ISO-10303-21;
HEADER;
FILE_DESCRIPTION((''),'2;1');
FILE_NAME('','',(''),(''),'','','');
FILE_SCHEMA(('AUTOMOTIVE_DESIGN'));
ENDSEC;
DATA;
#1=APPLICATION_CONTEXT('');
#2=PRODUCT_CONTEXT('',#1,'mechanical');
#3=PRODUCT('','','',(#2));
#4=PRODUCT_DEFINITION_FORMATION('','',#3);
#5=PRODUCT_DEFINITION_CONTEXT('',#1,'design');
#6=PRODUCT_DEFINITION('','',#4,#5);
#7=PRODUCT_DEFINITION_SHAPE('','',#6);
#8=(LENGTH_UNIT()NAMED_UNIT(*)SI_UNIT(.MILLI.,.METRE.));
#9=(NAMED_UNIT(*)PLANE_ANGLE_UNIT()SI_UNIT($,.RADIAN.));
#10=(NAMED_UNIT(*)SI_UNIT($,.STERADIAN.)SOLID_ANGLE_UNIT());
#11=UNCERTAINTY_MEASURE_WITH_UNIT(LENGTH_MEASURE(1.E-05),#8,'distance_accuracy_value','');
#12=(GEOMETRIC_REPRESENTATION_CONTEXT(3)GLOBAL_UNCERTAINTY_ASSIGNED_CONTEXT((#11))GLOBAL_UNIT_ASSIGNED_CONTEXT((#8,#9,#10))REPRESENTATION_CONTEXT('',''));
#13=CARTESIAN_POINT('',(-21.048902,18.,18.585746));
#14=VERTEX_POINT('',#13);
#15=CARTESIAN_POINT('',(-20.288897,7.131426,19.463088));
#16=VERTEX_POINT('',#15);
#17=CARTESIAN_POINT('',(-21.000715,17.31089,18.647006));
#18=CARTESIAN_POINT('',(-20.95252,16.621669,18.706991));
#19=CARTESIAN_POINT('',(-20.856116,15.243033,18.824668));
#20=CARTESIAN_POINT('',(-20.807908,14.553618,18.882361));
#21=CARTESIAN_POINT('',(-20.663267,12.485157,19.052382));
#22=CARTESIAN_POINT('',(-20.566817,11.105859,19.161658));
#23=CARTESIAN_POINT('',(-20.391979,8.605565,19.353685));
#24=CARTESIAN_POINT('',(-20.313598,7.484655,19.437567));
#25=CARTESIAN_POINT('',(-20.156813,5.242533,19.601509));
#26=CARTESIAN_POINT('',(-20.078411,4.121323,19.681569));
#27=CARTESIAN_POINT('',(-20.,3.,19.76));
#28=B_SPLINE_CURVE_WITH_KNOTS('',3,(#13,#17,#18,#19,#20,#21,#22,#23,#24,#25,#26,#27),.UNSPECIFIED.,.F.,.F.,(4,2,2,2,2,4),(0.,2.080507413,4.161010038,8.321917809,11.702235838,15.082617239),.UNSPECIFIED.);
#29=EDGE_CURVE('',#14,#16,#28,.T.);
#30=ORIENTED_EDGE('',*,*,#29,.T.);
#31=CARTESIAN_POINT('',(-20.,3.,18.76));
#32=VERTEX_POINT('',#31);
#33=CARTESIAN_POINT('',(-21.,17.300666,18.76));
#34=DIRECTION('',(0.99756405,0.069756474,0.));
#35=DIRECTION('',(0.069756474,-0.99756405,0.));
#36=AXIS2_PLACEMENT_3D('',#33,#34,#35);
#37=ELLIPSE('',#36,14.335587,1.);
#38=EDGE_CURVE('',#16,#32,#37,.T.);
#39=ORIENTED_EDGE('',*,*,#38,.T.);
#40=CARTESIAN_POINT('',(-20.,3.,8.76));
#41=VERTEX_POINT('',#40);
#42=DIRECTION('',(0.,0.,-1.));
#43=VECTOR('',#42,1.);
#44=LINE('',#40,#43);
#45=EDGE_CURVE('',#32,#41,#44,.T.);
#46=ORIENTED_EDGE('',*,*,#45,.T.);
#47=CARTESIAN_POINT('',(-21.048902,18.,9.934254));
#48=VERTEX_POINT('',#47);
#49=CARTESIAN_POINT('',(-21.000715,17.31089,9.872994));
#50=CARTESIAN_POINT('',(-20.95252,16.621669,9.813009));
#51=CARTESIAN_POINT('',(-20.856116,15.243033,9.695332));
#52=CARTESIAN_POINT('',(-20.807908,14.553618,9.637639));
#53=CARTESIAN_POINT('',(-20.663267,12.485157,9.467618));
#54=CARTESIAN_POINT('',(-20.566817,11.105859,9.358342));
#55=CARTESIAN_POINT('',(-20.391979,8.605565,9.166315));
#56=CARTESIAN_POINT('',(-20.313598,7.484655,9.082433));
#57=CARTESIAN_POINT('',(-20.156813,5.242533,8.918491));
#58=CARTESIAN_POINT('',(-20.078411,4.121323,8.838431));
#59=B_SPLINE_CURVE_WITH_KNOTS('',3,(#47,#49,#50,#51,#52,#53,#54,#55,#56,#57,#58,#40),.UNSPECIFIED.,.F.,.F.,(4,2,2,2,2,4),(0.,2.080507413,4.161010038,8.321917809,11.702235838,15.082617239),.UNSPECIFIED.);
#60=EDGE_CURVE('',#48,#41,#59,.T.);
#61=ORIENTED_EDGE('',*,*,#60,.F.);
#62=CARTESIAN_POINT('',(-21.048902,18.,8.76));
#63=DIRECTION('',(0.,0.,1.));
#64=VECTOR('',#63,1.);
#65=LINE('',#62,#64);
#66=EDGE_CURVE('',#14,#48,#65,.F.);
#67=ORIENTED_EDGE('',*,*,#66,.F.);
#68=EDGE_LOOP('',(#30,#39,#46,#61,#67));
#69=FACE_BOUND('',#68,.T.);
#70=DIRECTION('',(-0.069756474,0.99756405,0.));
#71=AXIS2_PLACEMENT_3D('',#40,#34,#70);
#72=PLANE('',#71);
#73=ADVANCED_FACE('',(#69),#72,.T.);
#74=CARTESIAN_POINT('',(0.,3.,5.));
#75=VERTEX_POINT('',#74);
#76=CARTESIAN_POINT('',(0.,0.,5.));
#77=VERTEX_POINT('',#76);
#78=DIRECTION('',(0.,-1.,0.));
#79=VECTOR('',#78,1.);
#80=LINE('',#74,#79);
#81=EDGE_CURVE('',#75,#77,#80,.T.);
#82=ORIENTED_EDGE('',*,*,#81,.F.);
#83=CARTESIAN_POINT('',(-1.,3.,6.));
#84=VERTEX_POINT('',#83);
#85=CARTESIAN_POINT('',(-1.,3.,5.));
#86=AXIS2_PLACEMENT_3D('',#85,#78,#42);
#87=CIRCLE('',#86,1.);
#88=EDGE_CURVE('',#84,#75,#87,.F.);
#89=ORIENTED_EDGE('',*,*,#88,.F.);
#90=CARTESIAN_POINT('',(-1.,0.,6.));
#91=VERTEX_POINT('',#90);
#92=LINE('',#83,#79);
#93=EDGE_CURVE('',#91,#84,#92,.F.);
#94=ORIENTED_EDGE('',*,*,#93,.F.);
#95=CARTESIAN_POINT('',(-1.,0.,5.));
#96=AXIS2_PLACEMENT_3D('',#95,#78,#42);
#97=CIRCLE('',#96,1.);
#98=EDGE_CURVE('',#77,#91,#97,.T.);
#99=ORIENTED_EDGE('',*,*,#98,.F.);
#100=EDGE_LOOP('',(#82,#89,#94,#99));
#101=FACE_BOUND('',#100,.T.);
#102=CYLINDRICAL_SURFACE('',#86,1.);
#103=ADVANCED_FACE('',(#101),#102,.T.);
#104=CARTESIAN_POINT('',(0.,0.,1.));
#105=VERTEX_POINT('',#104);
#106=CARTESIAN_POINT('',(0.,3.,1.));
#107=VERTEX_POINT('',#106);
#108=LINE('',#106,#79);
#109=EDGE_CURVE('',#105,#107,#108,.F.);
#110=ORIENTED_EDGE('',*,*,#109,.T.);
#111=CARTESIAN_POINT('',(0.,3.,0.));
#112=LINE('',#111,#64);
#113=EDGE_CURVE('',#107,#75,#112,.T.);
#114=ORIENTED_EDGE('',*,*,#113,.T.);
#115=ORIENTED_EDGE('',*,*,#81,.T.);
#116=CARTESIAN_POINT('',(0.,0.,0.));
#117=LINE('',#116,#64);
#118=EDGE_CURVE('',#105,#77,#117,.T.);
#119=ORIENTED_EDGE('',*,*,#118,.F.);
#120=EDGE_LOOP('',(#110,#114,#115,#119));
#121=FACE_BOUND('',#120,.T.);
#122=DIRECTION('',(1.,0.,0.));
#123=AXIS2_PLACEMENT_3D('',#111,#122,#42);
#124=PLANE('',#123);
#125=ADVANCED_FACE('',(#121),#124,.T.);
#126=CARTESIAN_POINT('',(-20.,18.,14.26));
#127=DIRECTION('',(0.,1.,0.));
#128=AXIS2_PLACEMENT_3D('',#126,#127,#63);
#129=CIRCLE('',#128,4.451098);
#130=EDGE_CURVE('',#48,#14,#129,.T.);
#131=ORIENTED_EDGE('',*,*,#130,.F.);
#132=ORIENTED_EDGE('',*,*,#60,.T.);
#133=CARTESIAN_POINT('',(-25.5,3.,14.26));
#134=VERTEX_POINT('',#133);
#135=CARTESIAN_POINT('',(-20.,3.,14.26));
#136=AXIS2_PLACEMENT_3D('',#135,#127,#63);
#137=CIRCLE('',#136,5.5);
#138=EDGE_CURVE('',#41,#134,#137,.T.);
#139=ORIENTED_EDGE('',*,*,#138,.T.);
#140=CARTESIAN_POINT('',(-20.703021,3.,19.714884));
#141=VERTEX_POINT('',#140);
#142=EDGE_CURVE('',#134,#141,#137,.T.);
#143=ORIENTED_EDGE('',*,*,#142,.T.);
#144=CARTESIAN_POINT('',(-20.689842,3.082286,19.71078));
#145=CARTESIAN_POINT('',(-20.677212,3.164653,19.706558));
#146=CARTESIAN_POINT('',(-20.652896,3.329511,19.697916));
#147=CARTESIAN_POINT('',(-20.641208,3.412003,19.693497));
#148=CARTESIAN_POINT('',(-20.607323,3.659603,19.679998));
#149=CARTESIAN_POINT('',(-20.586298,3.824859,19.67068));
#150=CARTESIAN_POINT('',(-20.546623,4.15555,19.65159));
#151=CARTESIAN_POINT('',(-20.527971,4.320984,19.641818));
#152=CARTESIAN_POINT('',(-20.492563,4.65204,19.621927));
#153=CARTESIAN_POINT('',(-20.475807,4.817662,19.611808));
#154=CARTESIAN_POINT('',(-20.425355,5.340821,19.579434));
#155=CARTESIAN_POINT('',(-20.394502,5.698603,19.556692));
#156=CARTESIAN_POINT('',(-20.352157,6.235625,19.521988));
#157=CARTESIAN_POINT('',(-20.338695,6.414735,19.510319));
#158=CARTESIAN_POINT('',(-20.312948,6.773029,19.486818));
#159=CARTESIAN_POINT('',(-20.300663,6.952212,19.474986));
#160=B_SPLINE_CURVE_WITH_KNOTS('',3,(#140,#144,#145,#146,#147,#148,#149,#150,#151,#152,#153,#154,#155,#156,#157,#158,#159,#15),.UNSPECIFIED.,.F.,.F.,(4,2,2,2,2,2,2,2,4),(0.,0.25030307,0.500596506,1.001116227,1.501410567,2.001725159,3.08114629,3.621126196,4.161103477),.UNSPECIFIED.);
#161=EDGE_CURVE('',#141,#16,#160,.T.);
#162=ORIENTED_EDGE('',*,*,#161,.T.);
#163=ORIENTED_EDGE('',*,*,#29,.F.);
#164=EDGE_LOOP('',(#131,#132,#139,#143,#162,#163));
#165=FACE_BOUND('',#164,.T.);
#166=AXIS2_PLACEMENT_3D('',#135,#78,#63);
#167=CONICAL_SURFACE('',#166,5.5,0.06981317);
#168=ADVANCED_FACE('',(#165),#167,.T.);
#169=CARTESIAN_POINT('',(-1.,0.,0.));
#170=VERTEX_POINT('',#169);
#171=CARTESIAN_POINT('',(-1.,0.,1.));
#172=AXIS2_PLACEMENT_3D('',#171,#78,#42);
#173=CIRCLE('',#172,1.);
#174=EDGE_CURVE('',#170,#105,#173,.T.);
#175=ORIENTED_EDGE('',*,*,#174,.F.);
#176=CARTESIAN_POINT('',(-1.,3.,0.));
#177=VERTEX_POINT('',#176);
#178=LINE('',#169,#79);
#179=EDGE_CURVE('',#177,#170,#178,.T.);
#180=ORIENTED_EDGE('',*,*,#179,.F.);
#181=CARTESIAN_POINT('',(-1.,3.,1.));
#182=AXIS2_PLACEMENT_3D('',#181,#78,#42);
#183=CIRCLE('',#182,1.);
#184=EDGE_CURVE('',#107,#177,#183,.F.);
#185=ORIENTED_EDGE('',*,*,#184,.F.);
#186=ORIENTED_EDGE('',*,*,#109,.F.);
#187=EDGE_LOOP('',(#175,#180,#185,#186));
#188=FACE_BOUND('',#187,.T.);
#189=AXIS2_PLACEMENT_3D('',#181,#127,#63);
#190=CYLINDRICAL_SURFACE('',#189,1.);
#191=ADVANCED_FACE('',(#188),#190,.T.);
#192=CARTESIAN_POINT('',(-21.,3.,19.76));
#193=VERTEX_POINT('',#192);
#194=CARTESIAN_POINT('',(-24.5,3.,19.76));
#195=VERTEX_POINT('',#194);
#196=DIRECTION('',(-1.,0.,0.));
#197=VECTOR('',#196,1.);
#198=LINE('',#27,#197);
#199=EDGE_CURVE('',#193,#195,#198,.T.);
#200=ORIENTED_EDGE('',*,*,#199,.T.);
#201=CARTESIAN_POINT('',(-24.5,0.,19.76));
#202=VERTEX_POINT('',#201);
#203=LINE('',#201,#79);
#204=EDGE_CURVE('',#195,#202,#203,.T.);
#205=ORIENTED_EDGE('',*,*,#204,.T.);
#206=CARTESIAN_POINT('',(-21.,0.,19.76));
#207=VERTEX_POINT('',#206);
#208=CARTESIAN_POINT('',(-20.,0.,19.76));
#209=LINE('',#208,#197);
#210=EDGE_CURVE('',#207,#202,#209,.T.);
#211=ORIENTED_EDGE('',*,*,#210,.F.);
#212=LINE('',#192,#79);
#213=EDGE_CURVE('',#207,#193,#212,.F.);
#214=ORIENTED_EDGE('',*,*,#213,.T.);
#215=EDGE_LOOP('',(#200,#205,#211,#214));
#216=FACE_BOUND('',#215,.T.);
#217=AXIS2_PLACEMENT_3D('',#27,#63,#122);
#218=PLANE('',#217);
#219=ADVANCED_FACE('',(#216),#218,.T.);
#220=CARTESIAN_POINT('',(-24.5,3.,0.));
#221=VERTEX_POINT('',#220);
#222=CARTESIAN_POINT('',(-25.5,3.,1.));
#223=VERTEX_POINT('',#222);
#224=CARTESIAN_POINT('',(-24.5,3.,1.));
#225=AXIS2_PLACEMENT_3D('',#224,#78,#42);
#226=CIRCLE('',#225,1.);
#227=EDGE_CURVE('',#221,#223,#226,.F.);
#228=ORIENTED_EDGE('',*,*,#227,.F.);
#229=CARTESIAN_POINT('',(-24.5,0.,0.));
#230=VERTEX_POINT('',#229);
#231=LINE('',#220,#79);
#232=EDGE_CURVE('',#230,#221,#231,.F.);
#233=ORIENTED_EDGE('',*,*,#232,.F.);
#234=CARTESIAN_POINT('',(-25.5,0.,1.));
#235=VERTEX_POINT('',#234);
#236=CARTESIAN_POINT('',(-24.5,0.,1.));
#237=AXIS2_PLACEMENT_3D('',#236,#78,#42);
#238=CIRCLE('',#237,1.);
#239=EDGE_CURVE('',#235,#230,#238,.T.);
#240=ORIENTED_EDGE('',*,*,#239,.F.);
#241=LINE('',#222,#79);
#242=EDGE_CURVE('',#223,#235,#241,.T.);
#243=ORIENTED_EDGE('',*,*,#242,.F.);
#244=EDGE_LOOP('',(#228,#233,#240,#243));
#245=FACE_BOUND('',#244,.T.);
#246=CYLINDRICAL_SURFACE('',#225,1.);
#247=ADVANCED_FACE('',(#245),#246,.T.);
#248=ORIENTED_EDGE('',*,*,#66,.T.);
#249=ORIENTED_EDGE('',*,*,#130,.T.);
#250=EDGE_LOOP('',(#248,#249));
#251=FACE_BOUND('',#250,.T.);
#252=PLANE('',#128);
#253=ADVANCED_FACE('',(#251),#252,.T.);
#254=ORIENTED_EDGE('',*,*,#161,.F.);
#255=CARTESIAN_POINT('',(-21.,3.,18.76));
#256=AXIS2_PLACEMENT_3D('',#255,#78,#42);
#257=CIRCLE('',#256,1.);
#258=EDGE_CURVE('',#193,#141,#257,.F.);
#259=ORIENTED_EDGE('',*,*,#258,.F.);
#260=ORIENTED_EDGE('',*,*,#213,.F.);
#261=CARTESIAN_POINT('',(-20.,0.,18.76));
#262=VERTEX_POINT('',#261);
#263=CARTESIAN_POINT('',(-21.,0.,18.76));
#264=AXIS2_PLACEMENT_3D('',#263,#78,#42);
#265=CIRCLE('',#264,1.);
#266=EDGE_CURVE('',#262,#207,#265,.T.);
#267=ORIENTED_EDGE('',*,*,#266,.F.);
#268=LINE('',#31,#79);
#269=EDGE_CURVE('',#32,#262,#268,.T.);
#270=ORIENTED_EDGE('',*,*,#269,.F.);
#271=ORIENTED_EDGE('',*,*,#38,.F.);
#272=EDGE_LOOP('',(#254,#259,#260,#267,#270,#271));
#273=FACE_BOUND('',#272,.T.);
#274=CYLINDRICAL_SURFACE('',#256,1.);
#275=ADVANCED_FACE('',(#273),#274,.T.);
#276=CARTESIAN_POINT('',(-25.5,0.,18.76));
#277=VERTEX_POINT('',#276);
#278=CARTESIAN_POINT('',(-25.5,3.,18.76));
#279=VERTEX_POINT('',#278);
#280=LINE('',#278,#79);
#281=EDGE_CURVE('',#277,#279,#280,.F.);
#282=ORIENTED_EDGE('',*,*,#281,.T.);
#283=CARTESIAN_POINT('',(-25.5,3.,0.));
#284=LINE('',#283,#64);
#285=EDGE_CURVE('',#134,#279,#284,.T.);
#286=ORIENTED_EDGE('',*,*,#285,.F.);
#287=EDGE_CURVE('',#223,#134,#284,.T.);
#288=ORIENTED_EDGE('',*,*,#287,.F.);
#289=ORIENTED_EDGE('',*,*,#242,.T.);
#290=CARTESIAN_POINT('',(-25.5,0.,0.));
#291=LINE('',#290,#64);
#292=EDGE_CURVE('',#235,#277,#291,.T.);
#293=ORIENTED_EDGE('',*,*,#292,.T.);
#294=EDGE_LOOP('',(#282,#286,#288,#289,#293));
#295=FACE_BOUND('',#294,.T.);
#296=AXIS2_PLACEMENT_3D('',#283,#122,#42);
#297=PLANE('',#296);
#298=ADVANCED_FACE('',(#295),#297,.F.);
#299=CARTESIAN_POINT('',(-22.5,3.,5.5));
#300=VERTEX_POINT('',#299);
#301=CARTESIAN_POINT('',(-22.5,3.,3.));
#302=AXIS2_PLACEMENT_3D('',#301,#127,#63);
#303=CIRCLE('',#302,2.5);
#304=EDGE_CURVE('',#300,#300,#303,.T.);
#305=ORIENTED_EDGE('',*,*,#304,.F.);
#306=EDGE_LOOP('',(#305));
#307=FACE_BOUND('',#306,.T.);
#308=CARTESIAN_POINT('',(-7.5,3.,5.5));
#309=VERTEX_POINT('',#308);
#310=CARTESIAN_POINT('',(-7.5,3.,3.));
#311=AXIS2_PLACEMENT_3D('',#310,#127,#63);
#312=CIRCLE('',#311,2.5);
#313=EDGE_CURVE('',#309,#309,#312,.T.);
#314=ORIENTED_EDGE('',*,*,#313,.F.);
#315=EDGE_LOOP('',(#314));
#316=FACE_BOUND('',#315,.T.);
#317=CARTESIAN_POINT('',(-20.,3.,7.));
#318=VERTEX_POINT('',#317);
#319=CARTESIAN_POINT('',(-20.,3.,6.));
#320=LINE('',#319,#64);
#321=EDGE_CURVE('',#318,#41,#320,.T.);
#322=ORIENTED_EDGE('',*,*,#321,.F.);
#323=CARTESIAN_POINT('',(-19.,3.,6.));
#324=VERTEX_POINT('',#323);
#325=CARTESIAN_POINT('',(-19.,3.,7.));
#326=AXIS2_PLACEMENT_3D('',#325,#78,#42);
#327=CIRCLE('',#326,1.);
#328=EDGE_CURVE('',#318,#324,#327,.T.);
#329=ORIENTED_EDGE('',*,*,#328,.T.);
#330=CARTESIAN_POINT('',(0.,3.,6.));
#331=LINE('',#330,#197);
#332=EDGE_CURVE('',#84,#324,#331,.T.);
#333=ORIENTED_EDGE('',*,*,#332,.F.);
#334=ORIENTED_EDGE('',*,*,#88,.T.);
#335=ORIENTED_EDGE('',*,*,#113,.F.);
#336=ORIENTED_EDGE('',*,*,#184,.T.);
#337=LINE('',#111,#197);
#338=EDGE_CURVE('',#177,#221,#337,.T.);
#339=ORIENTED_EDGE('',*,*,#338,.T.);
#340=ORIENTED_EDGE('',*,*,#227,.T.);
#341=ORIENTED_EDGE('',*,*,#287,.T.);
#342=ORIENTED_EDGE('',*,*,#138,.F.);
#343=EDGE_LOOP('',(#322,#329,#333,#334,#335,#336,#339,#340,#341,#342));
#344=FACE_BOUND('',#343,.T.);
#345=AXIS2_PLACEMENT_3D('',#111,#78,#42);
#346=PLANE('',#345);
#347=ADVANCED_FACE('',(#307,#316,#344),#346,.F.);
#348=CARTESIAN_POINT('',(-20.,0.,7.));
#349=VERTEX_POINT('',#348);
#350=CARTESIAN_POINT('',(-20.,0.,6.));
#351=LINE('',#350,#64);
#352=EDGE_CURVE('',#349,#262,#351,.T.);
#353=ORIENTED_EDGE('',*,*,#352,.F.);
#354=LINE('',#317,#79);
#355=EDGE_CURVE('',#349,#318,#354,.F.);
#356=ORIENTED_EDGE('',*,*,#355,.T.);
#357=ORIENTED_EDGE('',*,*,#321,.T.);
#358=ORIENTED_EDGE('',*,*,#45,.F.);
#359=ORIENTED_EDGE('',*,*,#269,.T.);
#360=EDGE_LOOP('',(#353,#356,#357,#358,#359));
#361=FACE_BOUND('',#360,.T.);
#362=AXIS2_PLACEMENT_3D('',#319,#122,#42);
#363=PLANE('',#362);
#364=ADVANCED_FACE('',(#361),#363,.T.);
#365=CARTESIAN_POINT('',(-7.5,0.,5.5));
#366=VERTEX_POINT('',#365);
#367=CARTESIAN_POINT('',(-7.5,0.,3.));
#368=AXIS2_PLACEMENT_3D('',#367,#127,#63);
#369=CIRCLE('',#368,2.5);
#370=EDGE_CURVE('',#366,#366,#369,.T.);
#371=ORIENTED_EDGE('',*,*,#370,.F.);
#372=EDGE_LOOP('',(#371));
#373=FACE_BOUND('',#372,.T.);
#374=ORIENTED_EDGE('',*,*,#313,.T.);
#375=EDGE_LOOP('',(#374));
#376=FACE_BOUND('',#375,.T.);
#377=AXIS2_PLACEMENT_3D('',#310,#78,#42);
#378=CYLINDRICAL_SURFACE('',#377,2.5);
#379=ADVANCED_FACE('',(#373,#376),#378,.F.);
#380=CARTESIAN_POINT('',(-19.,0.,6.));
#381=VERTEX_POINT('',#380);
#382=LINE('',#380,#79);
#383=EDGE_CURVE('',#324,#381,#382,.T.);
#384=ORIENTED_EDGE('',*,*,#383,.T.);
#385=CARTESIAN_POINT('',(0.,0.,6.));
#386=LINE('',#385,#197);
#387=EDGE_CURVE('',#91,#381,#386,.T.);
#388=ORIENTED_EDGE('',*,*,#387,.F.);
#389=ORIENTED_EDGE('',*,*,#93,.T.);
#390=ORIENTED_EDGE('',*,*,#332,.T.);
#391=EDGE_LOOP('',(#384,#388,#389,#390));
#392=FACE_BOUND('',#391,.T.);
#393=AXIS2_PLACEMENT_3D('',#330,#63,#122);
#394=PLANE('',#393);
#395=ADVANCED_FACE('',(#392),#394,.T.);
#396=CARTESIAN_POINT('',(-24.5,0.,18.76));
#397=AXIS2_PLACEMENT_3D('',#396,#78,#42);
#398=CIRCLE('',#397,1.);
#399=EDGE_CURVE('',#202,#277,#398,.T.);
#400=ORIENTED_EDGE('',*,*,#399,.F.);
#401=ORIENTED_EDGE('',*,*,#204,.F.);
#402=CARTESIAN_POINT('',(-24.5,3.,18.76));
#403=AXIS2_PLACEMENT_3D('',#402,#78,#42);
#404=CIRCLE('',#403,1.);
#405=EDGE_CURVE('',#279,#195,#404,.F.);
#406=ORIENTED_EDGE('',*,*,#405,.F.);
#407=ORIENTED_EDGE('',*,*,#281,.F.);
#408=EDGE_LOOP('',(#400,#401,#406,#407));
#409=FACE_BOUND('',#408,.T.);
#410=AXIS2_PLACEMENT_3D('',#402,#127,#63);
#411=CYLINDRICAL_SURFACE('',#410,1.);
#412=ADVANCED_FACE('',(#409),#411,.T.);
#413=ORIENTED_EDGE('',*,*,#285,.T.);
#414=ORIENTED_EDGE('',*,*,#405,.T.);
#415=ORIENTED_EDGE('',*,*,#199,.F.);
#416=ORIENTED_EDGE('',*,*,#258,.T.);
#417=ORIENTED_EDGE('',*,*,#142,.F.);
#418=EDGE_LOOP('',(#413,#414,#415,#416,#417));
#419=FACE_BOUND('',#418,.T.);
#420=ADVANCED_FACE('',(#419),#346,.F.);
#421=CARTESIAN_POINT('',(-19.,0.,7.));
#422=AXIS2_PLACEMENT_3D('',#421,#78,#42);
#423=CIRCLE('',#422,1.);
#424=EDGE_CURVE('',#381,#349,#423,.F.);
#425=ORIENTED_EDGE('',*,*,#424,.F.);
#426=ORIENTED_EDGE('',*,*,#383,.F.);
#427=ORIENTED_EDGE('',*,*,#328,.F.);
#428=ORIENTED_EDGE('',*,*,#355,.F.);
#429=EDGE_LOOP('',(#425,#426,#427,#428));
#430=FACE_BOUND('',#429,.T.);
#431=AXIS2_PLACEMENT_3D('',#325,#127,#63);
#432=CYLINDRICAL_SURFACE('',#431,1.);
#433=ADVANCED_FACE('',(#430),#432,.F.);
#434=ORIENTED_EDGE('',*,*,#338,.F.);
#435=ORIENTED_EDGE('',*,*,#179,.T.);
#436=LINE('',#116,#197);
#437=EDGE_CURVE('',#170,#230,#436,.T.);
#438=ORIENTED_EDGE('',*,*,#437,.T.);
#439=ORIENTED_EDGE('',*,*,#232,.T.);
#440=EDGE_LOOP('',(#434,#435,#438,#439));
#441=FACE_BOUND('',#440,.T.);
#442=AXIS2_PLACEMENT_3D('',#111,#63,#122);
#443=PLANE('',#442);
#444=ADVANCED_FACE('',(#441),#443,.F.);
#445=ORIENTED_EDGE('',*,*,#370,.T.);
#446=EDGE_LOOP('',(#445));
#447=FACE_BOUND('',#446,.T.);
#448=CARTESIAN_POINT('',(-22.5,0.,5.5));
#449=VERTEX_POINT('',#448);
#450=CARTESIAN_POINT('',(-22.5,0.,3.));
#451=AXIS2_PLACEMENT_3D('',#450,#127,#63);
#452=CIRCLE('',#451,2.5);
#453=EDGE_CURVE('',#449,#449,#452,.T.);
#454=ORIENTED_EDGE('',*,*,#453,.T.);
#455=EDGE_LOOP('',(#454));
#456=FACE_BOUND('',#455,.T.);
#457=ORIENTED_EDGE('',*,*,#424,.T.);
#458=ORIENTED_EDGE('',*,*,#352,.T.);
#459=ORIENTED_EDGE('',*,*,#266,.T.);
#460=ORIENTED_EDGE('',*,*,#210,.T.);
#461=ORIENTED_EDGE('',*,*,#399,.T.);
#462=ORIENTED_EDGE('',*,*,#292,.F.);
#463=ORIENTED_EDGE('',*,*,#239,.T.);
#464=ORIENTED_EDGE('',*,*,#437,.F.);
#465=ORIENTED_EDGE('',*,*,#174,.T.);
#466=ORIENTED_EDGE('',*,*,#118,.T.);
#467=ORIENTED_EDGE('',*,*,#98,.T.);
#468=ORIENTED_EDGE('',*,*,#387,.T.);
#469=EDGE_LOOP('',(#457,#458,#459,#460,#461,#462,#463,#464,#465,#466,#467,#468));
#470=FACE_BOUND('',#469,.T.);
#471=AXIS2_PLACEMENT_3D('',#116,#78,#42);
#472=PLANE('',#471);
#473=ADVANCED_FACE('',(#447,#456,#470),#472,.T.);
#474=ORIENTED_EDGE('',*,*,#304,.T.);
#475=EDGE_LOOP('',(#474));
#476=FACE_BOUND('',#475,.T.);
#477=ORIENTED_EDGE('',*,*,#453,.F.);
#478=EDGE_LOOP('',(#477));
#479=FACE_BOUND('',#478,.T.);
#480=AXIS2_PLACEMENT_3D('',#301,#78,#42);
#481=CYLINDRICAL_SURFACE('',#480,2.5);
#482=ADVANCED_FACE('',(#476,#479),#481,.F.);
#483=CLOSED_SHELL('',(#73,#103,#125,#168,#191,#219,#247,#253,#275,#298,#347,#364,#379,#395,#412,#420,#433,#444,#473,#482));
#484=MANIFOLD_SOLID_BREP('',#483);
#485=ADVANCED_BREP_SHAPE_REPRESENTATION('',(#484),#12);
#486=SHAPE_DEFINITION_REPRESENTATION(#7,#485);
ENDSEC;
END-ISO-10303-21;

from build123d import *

# Parameters (mm, degrees)
SKETCH1_R           = 2.5
BOSS_EXTRUDE1_DEPTH = 3
BOSS_EXTRUDE2_DEPTH = 15
BOSS_EXTRUDE2_DRAFT = 4
FILLET2_R           = 1
FILLET3_R           = 1
FILLET4_R           = 1
FILLET5_R           = 1
FILLET6_R           = 1
FILLET7_R           = 1


with BuildPart() as part:
    # Sketch1 → Boss-Extrude1 (new body)
    with BuildSketch(Plane(origin=(0, 0, 0), x_dir=(1, 0, 0), z_dir=(0, 1, 0))):
        Polygon((0, 0), (-25.5, 0), (-25.5, -19.76), (-20, -19.76), (-20, -6), (0, -6), align=None)
        with Locations(Location((-7.5, -3, 0), (0, 0, 270))):
            Circle(SKETCH1_R, mode=Mode.SUBTRACT)
        with Locations(Location((-22.5, -3, 0), (0, 0, 270))):
            Circle(SKETCH1_R, mode=Mode.SUBTRACT)
    extrude(amount=BOSS_EXTRUDE1_DEPTH)


with BuildPart() as boss_extrude2_tool:
    # Sketch3 → Boss-Extrude2 (with draft: the straight prism first)
    with BuildSketch(Plane(origin=(0, 3, 0), x_dir=(1, 0, 0), z_dir=(0, 1, 0))):
        with BuildLine():
            ThreePointArc((-20, -8.76), (-25.5, -14.26), (-20, -19.76))
            Line((-20, -19.76), (-20, -8.76))
        make_face()
    extrude(amount=BOSS_EXTRUDE2_DEPTH)
    # Boss-Extrude2: the draft: its side faces are tilted about the plane it starts from
    boss_extrude2_sides = [boss_extrude2_tool.faces().sort_by_distance(p)[0] for p in [
        (-25.5, 10.5, 14.26),
        (-20, 10.5, 14.26),
    ]]
    draft(boss_extrude2_sides, Plane(origin=(0, 3, 0), x_dir=(1, 0, 0), z_dir=(0, 1, 0)), BOSS_EXTRUDE2_DRAFT)


with BuildPart() as part_1:
    add(part.part)

    # Boss-Extrude2: add boss_extrude2_tool
    add(boss_extrude2_tool.part)

    # Fillet2
    fillet2_edges = [part_1.edges().sort_by_distance(p)[0] for p in [
        (-20, 1.5, 6),
    ]]
    fillet(fillet2_edges, radius=FILLET2_R)

    # Fillet3
    # the kernel refuses this fillet: 1 mm, written as the material it takes off along each edge
    with BuildSketch(Plane(origin=(-20, -6, 19.76), x_dir=(0, 0, -1), z_dir=(0, 1, 0))) as fillet3_piece_1:
        with BuildLine():
            CenterArc((FILLET3_R, FILLET3_R), FILLET3_R, 180, 90)
            Line((0, FILLET3_R), (-FILLET3_R * 0.02, FILLET3_R))
            Line((-FILLET3_R * 0.02, FILLET3_R), (-FILLET3_R * 0.02, -FILLET3_R * 0.02))
            Line((-FILLET3_R * 0.02, -FILLET3_R * 0.02), (FILLET3_R, -FILLET3_R * 0.02))
            Line((FILLET3_R, -FILLET3_R * 0.02), (FILLET3_R, 0))
        make_face()
    extrude(amount=15, mode=Mode.SUBTRACT)

    # Fillet4
    fillet4_edges = [part_1.edges().sort_by_distance(p)[0] for p in [
        (-25.5, 1.5, 19.76),
    ]]
    fillet(fillet4_edges, radius=FILLET4_R)

    # Fillet5
    fillet5_edges = [part_1.edges().sort_by_distance(p)[0] for p in [
        (-25.5, 1.5, 0),
    ]]
    fillet(fillet5_edges, radius=FILLET5_R)

    # Fillet6
    fillet6_edges = [part_1.edges().sort_by_distance(p)[0] for p in [
        (0, 1.5, 0),
    ]]
    fillet(fillet6_edges, radius=FILLET6_R)

    # Fillet7
    fillet7_edges = [part_1.edges().sort_by_distance(p)[0] for p in [
        (0, 1.5, 6),
    ]]
    fillet(fillet7_edges, radius=FILLET7_R)


solid = part_1.part
